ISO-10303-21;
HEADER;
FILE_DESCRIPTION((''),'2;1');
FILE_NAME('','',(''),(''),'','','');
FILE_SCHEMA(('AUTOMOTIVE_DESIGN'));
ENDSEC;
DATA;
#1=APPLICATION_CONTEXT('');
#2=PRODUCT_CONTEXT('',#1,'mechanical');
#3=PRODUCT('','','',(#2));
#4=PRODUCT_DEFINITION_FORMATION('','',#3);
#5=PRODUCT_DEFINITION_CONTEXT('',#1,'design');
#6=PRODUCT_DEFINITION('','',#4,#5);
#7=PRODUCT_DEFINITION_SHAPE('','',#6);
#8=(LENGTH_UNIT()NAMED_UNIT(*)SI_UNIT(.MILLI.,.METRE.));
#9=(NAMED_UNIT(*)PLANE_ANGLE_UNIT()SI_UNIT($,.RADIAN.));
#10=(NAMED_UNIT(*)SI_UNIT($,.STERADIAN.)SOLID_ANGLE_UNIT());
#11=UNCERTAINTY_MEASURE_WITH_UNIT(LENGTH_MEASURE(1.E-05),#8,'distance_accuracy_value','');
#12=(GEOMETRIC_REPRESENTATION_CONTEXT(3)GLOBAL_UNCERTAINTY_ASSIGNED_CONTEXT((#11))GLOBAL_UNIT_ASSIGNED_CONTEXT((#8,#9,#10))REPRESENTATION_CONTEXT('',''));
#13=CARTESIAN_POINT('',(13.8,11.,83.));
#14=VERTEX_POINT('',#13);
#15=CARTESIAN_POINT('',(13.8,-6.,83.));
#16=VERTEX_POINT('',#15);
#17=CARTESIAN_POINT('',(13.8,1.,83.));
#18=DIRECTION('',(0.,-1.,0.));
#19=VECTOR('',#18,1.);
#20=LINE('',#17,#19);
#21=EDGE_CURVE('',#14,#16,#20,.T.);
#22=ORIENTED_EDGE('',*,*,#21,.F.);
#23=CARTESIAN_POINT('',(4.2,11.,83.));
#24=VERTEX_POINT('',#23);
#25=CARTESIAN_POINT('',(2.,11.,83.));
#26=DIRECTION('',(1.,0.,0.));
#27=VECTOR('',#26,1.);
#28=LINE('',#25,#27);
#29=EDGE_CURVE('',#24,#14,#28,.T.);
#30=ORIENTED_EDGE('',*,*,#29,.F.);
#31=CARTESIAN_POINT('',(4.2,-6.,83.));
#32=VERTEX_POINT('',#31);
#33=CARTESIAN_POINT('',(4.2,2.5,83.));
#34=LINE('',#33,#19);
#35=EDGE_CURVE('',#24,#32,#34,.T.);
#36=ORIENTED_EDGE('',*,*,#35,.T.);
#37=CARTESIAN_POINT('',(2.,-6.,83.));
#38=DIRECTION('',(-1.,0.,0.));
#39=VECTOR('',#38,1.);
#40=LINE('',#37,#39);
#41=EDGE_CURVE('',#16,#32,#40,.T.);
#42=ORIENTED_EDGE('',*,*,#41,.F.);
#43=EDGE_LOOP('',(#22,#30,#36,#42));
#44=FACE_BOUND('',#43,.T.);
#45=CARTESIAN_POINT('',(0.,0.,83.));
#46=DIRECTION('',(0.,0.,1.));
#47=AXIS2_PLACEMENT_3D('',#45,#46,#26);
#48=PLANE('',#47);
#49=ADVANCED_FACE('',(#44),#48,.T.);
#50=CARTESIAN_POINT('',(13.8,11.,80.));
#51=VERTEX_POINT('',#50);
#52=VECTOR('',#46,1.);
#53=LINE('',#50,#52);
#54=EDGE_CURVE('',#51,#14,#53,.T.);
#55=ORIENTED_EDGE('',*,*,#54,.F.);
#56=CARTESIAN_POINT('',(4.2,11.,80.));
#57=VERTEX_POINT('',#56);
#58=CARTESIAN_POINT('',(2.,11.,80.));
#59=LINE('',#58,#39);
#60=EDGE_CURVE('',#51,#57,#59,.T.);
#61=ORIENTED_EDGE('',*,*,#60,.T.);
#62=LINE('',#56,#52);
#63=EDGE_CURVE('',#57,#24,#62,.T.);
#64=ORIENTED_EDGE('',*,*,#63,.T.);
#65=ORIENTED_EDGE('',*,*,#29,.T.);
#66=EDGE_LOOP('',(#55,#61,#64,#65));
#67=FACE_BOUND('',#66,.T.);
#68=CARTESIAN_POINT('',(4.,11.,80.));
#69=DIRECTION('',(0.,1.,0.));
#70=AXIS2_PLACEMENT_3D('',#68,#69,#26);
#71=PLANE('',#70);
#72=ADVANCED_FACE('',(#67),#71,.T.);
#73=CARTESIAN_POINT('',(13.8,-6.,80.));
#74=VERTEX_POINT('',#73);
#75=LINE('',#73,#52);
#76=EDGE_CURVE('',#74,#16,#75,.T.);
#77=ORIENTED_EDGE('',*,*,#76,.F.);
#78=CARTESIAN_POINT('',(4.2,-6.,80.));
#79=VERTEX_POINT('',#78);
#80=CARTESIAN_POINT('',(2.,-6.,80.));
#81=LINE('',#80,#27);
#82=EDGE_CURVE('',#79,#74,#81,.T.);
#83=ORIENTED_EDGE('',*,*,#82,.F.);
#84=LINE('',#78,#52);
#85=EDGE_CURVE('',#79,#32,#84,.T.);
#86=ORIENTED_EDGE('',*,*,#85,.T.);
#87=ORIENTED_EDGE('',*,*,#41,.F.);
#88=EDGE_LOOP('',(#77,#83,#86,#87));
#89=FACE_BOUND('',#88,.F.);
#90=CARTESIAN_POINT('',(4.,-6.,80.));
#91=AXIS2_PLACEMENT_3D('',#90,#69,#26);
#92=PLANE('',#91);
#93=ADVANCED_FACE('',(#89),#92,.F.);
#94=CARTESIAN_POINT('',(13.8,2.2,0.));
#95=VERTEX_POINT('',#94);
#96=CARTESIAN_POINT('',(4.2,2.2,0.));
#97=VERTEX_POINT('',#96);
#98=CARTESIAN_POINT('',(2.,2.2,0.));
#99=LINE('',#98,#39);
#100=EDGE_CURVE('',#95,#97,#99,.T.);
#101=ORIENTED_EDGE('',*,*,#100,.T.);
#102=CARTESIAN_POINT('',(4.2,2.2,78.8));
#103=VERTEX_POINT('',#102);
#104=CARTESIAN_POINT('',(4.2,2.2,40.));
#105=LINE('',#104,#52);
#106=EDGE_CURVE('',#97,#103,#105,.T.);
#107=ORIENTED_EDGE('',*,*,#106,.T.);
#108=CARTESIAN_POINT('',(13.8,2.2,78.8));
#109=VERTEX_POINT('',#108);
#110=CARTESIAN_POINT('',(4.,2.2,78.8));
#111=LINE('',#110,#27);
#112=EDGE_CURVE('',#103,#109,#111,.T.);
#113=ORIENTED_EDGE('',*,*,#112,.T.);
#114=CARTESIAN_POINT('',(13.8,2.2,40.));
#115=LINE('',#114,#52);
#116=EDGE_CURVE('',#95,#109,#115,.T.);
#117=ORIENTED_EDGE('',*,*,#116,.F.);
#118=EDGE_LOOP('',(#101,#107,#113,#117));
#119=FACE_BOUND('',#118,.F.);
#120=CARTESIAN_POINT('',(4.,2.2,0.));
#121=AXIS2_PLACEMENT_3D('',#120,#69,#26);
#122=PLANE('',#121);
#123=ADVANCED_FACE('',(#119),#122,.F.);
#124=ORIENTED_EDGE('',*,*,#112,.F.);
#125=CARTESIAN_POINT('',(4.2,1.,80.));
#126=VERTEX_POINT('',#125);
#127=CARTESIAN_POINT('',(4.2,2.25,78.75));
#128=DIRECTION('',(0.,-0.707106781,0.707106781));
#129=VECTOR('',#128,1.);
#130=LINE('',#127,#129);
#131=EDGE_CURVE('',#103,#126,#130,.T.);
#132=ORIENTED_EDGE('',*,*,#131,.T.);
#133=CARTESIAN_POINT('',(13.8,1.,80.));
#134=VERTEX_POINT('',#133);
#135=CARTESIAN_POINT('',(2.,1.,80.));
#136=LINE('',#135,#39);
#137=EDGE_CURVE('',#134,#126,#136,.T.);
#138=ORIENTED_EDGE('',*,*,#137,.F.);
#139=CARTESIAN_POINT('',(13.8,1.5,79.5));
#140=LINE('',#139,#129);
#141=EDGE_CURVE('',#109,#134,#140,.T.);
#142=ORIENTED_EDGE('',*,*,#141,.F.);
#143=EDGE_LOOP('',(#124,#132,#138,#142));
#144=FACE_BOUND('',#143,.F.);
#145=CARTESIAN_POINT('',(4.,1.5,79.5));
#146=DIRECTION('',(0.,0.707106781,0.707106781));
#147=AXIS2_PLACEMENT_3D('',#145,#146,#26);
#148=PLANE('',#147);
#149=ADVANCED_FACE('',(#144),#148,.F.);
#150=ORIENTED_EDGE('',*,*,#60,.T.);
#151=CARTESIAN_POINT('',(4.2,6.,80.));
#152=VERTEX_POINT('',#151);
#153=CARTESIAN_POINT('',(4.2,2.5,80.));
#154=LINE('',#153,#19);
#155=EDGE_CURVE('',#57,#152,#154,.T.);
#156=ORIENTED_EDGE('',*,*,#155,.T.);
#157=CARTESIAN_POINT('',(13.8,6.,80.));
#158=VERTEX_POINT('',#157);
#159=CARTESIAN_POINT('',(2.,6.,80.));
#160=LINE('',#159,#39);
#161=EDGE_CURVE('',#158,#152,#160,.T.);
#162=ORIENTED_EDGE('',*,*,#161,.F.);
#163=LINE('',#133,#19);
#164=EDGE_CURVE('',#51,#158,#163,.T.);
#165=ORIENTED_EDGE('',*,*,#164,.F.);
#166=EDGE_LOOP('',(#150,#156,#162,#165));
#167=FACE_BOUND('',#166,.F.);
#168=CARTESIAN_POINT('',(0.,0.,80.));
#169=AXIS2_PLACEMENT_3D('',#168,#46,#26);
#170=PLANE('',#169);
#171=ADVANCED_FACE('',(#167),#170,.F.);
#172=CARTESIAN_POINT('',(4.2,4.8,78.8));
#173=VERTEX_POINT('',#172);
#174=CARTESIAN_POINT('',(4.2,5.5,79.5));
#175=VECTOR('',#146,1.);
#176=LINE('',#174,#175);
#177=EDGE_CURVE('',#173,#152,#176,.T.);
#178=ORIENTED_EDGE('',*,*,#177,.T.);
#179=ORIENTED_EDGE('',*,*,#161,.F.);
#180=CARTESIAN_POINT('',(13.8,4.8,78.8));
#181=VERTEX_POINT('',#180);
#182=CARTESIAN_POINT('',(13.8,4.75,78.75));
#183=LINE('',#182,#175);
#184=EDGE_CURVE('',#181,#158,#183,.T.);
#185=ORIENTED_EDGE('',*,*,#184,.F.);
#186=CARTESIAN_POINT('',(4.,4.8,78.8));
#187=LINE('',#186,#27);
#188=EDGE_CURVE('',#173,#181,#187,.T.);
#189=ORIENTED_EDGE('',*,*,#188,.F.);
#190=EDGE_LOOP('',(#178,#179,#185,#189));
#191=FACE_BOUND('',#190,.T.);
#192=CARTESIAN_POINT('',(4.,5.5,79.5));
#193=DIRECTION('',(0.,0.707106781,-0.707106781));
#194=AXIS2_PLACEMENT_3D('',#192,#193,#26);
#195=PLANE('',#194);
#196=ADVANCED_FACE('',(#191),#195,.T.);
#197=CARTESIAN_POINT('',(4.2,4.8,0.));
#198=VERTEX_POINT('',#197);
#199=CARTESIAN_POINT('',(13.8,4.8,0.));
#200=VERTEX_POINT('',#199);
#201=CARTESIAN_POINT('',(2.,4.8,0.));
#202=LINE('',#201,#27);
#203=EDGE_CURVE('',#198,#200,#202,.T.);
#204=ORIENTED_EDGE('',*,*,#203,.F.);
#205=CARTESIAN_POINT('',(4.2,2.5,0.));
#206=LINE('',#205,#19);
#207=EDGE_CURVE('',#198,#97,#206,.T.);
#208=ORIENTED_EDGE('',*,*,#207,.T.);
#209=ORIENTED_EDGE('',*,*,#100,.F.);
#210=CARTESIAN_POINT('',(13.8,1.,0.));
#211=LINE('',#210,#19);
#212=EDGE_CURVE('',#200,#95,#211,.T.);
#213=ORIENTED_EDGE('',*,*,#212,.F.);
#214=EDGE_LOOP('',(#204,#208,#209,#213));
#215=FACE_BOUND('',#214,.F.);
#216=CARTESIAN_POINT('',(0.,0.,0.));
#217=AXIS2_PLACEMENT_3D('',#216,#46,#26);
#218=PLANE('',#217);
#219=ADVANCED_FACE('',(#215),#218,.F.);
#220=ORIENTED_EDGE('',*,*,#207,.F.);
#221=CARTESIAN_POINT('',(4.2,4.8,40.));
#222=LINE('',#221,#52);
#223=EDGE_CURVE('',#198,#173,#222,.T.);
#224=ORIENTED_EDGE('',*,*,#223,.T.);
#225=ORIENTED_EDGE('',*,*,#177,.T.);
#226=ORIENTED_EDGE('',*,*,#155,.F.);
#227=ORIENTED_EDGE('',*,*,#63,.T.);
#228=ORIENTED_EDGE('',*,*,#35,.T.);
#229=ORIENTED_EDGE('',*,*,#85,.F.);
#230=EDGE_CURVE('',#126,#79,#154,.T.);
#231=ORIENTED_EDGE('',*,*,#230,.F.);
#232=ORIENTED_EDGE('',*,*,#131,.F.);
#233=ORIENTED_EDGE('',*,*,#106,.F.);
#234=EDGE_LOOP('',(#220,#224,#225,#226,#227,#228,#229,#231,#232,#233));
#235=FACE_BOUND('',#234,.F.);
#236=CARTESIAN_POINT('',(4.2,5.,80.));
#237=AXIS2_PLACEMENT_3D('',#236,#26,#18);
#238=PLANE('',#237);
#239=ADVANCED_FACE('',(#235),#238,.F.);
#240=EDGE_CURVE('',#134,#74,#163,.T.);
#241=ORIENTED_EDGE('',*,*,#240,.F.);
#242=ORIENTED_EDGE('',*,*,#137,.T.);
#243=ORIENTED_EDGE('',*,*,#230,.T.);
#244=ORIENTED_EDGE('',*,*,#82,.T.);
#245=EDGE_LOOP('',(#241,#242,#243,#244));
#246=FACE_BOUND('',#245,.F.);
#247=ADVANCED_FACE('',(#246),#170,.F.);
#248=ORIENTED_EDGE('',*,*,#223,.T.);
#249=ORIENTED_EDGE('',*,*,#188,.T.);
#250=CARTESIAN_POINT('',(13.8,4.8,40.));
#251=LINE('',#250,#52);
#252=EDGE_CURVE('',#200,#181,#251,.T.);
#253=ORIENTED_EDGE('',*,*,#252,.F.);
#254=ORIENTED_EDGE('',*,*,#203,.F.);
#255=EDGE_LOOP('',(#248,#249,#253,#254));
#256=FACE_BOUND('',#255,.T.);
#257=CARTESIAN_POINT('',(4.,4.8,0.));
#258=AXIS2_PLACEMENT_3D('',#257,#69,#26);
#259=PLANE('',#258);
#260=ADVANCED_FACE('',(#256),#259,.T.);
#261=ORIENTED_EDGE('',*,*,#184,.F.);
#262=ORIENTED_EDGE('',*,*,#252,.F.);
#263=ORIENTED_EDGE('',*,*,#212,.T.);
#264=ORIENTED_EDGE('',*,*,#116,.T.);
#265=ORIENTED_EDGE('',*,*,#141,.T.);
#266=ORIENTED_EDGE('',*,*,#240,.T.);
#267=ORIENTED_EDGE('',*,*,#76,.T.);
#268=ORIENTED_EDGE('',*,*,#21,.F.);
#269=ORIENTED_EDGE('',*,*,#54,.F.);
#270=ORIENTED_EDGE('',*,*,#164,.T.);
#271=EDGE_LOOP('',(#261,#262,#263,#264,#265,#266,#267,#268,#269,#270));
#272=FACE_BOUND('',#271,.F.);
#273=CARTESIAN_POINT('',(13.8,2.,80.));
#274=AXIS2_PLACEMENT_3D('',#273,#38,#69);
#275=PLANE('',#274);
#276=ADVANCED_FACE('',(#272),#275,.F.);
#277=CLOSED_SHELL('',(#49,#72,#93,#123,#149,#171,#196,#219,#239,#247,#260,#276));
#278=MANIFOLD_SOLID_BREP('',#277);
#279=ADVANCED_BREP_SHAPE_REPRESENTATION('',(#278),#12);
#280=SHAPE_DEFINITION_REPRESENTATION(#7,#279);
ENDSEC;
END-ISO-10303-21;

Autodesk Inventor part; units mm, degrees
ref_plane "YZ Plane" through (0, 0, 0) normal (1, 0, 0) x (0, 1, 0)
ref_plane "XZ Plane" through (0, 0, 0) normal (0, 1, 0) x (-1, 0, 0)
ref_plane "XY Plane" through (0, 0, 0) normal (0, 0, 1) x (1, 0, 0)
sketch "Sketch1" plane through (0, 0, 0) normal (0, 0, 1) x (1, 0, 0)
  arc A0 (16, 5) -> (14, 7) centre (14, 5) ccw projected
  line L0 (14, 7) -> (8, 7) projected
  arc A1 (6, 9) -> (8, 7) centre (8, 9) ccw projected
  line L1 (6, 9) -> (6, 25.5) projected
  arc A2 (6, 25.5) -> (4, 27.5) centre (4, 25.5) ccw projected
  line L2 (4, 27.5) -> (-14, 27.5) projected
  arc A3 (-14, 27.5) -> (-16, 25.5) centre (-14, 25.5) ccw projected
  line L3 (-16, 25.5) -> (-16, 20.5) projected
  line L4 (-16, 20.5) -> (4, 20.5) projected
  line L5 (4, 20.5) -> (4, 5) projected
  line L6 (4, 5) -> (14, 5) projected
  line L7 (14, 5) -> (14, -15) projected
  line L8 (14, -15) -> (4, -15) projected
  line L9 (4, -15) -> (4, -20.5) projected
  line L10 (4, -20.5) -> (-16, -20.5) projected
  line L11 (-16, -20.5) -> (-16, -25.5) projected
  arc A4 (-16, -25.5) -> (-14, -27.5) centre (-14, -25.5) ccw projected
  line L12 (-14, -27.5) -> (4, -27.5) projected
  arc A5 (4, -27.5) -> (6, -25.5) centre (4, -25.5) ccw projected
  line L13 (6, -25.5) -> (6, -19) projected
  arc A6 (8, -17) -> (6, -19) centre (8, -19) ccw projected
  line L14 (8, -17) -> (14, -17) projected
  arc A7 (14, -17) -> (16, -15) centre (14, -15) ccw projected
  line L15 (16, -15) -> (16, 5) projected
  circle A8 centre (-10.2273, -23.9687) radius 0.75 projected
  circle A9 centre (-0.7, 24) radius 0.75 projected
  circle A10 centre (-10.2, 24) radius 0.75 projected
  circle A11 centre (-0.7, -24) radius 0.75 projected
  line L16 (14, 5) -> (4, 5)
  line L17 (4, 5) -> (4, 2)
  line L18 (4, 2) -> (14, 2)
  line L19 (14, 2) -> (14, 5)
  point P0 (0, 0)
extrude "Extrusion1" add sketch "Sketch1" along normal blind 80 contours L6 L7 L18 L17
sketch "Sketch2" plane through (0, 0, 80) normal (0, 0, 1) x (1, 0, 0)
  line L0 (14, 2) -> (14, 5) projected
  line L1 (14, 5) -> (4, 5) projected
  line L2 (4, 5) -> (4, 2) projected
  line L3 (4, 2) -> (14, 2) projected
  line L4 (14, 2) -> (4, 2)
  line L5 (4, 2) -> (4, -6)
  line L6 (4, -6) -> (14, -6)
  line L7 (14, -6) -> (14, 2)
  line L8 (14, 5) -> (4, 5)
  line L9 (4, 5) -> (4, 11)
  line L10 (4, 11) -> (14, 11)
  line L11 (14, 11) -> (14, 5)
  point P0 (0, 0)
  dimension "d2" = 8
  dimension "d3" = 6
extrude "Extrusion2" add sketch "Sketch2" along normal blind 3
chamfer "Chamfer1" distance 1 angle 45 2 edges at (9, 2, 80) (9, 5, 80)
thicken "Thicken1" operation add thickness 0.2 both sides no extend neighbours yes toward (1, 0, 0) faces at (4, 4, 26.3333) (7.3333, 2, 26.3333) (14, 3, 26.3333) (10.6667, 5, 26.3333)
properties part number "fence"
